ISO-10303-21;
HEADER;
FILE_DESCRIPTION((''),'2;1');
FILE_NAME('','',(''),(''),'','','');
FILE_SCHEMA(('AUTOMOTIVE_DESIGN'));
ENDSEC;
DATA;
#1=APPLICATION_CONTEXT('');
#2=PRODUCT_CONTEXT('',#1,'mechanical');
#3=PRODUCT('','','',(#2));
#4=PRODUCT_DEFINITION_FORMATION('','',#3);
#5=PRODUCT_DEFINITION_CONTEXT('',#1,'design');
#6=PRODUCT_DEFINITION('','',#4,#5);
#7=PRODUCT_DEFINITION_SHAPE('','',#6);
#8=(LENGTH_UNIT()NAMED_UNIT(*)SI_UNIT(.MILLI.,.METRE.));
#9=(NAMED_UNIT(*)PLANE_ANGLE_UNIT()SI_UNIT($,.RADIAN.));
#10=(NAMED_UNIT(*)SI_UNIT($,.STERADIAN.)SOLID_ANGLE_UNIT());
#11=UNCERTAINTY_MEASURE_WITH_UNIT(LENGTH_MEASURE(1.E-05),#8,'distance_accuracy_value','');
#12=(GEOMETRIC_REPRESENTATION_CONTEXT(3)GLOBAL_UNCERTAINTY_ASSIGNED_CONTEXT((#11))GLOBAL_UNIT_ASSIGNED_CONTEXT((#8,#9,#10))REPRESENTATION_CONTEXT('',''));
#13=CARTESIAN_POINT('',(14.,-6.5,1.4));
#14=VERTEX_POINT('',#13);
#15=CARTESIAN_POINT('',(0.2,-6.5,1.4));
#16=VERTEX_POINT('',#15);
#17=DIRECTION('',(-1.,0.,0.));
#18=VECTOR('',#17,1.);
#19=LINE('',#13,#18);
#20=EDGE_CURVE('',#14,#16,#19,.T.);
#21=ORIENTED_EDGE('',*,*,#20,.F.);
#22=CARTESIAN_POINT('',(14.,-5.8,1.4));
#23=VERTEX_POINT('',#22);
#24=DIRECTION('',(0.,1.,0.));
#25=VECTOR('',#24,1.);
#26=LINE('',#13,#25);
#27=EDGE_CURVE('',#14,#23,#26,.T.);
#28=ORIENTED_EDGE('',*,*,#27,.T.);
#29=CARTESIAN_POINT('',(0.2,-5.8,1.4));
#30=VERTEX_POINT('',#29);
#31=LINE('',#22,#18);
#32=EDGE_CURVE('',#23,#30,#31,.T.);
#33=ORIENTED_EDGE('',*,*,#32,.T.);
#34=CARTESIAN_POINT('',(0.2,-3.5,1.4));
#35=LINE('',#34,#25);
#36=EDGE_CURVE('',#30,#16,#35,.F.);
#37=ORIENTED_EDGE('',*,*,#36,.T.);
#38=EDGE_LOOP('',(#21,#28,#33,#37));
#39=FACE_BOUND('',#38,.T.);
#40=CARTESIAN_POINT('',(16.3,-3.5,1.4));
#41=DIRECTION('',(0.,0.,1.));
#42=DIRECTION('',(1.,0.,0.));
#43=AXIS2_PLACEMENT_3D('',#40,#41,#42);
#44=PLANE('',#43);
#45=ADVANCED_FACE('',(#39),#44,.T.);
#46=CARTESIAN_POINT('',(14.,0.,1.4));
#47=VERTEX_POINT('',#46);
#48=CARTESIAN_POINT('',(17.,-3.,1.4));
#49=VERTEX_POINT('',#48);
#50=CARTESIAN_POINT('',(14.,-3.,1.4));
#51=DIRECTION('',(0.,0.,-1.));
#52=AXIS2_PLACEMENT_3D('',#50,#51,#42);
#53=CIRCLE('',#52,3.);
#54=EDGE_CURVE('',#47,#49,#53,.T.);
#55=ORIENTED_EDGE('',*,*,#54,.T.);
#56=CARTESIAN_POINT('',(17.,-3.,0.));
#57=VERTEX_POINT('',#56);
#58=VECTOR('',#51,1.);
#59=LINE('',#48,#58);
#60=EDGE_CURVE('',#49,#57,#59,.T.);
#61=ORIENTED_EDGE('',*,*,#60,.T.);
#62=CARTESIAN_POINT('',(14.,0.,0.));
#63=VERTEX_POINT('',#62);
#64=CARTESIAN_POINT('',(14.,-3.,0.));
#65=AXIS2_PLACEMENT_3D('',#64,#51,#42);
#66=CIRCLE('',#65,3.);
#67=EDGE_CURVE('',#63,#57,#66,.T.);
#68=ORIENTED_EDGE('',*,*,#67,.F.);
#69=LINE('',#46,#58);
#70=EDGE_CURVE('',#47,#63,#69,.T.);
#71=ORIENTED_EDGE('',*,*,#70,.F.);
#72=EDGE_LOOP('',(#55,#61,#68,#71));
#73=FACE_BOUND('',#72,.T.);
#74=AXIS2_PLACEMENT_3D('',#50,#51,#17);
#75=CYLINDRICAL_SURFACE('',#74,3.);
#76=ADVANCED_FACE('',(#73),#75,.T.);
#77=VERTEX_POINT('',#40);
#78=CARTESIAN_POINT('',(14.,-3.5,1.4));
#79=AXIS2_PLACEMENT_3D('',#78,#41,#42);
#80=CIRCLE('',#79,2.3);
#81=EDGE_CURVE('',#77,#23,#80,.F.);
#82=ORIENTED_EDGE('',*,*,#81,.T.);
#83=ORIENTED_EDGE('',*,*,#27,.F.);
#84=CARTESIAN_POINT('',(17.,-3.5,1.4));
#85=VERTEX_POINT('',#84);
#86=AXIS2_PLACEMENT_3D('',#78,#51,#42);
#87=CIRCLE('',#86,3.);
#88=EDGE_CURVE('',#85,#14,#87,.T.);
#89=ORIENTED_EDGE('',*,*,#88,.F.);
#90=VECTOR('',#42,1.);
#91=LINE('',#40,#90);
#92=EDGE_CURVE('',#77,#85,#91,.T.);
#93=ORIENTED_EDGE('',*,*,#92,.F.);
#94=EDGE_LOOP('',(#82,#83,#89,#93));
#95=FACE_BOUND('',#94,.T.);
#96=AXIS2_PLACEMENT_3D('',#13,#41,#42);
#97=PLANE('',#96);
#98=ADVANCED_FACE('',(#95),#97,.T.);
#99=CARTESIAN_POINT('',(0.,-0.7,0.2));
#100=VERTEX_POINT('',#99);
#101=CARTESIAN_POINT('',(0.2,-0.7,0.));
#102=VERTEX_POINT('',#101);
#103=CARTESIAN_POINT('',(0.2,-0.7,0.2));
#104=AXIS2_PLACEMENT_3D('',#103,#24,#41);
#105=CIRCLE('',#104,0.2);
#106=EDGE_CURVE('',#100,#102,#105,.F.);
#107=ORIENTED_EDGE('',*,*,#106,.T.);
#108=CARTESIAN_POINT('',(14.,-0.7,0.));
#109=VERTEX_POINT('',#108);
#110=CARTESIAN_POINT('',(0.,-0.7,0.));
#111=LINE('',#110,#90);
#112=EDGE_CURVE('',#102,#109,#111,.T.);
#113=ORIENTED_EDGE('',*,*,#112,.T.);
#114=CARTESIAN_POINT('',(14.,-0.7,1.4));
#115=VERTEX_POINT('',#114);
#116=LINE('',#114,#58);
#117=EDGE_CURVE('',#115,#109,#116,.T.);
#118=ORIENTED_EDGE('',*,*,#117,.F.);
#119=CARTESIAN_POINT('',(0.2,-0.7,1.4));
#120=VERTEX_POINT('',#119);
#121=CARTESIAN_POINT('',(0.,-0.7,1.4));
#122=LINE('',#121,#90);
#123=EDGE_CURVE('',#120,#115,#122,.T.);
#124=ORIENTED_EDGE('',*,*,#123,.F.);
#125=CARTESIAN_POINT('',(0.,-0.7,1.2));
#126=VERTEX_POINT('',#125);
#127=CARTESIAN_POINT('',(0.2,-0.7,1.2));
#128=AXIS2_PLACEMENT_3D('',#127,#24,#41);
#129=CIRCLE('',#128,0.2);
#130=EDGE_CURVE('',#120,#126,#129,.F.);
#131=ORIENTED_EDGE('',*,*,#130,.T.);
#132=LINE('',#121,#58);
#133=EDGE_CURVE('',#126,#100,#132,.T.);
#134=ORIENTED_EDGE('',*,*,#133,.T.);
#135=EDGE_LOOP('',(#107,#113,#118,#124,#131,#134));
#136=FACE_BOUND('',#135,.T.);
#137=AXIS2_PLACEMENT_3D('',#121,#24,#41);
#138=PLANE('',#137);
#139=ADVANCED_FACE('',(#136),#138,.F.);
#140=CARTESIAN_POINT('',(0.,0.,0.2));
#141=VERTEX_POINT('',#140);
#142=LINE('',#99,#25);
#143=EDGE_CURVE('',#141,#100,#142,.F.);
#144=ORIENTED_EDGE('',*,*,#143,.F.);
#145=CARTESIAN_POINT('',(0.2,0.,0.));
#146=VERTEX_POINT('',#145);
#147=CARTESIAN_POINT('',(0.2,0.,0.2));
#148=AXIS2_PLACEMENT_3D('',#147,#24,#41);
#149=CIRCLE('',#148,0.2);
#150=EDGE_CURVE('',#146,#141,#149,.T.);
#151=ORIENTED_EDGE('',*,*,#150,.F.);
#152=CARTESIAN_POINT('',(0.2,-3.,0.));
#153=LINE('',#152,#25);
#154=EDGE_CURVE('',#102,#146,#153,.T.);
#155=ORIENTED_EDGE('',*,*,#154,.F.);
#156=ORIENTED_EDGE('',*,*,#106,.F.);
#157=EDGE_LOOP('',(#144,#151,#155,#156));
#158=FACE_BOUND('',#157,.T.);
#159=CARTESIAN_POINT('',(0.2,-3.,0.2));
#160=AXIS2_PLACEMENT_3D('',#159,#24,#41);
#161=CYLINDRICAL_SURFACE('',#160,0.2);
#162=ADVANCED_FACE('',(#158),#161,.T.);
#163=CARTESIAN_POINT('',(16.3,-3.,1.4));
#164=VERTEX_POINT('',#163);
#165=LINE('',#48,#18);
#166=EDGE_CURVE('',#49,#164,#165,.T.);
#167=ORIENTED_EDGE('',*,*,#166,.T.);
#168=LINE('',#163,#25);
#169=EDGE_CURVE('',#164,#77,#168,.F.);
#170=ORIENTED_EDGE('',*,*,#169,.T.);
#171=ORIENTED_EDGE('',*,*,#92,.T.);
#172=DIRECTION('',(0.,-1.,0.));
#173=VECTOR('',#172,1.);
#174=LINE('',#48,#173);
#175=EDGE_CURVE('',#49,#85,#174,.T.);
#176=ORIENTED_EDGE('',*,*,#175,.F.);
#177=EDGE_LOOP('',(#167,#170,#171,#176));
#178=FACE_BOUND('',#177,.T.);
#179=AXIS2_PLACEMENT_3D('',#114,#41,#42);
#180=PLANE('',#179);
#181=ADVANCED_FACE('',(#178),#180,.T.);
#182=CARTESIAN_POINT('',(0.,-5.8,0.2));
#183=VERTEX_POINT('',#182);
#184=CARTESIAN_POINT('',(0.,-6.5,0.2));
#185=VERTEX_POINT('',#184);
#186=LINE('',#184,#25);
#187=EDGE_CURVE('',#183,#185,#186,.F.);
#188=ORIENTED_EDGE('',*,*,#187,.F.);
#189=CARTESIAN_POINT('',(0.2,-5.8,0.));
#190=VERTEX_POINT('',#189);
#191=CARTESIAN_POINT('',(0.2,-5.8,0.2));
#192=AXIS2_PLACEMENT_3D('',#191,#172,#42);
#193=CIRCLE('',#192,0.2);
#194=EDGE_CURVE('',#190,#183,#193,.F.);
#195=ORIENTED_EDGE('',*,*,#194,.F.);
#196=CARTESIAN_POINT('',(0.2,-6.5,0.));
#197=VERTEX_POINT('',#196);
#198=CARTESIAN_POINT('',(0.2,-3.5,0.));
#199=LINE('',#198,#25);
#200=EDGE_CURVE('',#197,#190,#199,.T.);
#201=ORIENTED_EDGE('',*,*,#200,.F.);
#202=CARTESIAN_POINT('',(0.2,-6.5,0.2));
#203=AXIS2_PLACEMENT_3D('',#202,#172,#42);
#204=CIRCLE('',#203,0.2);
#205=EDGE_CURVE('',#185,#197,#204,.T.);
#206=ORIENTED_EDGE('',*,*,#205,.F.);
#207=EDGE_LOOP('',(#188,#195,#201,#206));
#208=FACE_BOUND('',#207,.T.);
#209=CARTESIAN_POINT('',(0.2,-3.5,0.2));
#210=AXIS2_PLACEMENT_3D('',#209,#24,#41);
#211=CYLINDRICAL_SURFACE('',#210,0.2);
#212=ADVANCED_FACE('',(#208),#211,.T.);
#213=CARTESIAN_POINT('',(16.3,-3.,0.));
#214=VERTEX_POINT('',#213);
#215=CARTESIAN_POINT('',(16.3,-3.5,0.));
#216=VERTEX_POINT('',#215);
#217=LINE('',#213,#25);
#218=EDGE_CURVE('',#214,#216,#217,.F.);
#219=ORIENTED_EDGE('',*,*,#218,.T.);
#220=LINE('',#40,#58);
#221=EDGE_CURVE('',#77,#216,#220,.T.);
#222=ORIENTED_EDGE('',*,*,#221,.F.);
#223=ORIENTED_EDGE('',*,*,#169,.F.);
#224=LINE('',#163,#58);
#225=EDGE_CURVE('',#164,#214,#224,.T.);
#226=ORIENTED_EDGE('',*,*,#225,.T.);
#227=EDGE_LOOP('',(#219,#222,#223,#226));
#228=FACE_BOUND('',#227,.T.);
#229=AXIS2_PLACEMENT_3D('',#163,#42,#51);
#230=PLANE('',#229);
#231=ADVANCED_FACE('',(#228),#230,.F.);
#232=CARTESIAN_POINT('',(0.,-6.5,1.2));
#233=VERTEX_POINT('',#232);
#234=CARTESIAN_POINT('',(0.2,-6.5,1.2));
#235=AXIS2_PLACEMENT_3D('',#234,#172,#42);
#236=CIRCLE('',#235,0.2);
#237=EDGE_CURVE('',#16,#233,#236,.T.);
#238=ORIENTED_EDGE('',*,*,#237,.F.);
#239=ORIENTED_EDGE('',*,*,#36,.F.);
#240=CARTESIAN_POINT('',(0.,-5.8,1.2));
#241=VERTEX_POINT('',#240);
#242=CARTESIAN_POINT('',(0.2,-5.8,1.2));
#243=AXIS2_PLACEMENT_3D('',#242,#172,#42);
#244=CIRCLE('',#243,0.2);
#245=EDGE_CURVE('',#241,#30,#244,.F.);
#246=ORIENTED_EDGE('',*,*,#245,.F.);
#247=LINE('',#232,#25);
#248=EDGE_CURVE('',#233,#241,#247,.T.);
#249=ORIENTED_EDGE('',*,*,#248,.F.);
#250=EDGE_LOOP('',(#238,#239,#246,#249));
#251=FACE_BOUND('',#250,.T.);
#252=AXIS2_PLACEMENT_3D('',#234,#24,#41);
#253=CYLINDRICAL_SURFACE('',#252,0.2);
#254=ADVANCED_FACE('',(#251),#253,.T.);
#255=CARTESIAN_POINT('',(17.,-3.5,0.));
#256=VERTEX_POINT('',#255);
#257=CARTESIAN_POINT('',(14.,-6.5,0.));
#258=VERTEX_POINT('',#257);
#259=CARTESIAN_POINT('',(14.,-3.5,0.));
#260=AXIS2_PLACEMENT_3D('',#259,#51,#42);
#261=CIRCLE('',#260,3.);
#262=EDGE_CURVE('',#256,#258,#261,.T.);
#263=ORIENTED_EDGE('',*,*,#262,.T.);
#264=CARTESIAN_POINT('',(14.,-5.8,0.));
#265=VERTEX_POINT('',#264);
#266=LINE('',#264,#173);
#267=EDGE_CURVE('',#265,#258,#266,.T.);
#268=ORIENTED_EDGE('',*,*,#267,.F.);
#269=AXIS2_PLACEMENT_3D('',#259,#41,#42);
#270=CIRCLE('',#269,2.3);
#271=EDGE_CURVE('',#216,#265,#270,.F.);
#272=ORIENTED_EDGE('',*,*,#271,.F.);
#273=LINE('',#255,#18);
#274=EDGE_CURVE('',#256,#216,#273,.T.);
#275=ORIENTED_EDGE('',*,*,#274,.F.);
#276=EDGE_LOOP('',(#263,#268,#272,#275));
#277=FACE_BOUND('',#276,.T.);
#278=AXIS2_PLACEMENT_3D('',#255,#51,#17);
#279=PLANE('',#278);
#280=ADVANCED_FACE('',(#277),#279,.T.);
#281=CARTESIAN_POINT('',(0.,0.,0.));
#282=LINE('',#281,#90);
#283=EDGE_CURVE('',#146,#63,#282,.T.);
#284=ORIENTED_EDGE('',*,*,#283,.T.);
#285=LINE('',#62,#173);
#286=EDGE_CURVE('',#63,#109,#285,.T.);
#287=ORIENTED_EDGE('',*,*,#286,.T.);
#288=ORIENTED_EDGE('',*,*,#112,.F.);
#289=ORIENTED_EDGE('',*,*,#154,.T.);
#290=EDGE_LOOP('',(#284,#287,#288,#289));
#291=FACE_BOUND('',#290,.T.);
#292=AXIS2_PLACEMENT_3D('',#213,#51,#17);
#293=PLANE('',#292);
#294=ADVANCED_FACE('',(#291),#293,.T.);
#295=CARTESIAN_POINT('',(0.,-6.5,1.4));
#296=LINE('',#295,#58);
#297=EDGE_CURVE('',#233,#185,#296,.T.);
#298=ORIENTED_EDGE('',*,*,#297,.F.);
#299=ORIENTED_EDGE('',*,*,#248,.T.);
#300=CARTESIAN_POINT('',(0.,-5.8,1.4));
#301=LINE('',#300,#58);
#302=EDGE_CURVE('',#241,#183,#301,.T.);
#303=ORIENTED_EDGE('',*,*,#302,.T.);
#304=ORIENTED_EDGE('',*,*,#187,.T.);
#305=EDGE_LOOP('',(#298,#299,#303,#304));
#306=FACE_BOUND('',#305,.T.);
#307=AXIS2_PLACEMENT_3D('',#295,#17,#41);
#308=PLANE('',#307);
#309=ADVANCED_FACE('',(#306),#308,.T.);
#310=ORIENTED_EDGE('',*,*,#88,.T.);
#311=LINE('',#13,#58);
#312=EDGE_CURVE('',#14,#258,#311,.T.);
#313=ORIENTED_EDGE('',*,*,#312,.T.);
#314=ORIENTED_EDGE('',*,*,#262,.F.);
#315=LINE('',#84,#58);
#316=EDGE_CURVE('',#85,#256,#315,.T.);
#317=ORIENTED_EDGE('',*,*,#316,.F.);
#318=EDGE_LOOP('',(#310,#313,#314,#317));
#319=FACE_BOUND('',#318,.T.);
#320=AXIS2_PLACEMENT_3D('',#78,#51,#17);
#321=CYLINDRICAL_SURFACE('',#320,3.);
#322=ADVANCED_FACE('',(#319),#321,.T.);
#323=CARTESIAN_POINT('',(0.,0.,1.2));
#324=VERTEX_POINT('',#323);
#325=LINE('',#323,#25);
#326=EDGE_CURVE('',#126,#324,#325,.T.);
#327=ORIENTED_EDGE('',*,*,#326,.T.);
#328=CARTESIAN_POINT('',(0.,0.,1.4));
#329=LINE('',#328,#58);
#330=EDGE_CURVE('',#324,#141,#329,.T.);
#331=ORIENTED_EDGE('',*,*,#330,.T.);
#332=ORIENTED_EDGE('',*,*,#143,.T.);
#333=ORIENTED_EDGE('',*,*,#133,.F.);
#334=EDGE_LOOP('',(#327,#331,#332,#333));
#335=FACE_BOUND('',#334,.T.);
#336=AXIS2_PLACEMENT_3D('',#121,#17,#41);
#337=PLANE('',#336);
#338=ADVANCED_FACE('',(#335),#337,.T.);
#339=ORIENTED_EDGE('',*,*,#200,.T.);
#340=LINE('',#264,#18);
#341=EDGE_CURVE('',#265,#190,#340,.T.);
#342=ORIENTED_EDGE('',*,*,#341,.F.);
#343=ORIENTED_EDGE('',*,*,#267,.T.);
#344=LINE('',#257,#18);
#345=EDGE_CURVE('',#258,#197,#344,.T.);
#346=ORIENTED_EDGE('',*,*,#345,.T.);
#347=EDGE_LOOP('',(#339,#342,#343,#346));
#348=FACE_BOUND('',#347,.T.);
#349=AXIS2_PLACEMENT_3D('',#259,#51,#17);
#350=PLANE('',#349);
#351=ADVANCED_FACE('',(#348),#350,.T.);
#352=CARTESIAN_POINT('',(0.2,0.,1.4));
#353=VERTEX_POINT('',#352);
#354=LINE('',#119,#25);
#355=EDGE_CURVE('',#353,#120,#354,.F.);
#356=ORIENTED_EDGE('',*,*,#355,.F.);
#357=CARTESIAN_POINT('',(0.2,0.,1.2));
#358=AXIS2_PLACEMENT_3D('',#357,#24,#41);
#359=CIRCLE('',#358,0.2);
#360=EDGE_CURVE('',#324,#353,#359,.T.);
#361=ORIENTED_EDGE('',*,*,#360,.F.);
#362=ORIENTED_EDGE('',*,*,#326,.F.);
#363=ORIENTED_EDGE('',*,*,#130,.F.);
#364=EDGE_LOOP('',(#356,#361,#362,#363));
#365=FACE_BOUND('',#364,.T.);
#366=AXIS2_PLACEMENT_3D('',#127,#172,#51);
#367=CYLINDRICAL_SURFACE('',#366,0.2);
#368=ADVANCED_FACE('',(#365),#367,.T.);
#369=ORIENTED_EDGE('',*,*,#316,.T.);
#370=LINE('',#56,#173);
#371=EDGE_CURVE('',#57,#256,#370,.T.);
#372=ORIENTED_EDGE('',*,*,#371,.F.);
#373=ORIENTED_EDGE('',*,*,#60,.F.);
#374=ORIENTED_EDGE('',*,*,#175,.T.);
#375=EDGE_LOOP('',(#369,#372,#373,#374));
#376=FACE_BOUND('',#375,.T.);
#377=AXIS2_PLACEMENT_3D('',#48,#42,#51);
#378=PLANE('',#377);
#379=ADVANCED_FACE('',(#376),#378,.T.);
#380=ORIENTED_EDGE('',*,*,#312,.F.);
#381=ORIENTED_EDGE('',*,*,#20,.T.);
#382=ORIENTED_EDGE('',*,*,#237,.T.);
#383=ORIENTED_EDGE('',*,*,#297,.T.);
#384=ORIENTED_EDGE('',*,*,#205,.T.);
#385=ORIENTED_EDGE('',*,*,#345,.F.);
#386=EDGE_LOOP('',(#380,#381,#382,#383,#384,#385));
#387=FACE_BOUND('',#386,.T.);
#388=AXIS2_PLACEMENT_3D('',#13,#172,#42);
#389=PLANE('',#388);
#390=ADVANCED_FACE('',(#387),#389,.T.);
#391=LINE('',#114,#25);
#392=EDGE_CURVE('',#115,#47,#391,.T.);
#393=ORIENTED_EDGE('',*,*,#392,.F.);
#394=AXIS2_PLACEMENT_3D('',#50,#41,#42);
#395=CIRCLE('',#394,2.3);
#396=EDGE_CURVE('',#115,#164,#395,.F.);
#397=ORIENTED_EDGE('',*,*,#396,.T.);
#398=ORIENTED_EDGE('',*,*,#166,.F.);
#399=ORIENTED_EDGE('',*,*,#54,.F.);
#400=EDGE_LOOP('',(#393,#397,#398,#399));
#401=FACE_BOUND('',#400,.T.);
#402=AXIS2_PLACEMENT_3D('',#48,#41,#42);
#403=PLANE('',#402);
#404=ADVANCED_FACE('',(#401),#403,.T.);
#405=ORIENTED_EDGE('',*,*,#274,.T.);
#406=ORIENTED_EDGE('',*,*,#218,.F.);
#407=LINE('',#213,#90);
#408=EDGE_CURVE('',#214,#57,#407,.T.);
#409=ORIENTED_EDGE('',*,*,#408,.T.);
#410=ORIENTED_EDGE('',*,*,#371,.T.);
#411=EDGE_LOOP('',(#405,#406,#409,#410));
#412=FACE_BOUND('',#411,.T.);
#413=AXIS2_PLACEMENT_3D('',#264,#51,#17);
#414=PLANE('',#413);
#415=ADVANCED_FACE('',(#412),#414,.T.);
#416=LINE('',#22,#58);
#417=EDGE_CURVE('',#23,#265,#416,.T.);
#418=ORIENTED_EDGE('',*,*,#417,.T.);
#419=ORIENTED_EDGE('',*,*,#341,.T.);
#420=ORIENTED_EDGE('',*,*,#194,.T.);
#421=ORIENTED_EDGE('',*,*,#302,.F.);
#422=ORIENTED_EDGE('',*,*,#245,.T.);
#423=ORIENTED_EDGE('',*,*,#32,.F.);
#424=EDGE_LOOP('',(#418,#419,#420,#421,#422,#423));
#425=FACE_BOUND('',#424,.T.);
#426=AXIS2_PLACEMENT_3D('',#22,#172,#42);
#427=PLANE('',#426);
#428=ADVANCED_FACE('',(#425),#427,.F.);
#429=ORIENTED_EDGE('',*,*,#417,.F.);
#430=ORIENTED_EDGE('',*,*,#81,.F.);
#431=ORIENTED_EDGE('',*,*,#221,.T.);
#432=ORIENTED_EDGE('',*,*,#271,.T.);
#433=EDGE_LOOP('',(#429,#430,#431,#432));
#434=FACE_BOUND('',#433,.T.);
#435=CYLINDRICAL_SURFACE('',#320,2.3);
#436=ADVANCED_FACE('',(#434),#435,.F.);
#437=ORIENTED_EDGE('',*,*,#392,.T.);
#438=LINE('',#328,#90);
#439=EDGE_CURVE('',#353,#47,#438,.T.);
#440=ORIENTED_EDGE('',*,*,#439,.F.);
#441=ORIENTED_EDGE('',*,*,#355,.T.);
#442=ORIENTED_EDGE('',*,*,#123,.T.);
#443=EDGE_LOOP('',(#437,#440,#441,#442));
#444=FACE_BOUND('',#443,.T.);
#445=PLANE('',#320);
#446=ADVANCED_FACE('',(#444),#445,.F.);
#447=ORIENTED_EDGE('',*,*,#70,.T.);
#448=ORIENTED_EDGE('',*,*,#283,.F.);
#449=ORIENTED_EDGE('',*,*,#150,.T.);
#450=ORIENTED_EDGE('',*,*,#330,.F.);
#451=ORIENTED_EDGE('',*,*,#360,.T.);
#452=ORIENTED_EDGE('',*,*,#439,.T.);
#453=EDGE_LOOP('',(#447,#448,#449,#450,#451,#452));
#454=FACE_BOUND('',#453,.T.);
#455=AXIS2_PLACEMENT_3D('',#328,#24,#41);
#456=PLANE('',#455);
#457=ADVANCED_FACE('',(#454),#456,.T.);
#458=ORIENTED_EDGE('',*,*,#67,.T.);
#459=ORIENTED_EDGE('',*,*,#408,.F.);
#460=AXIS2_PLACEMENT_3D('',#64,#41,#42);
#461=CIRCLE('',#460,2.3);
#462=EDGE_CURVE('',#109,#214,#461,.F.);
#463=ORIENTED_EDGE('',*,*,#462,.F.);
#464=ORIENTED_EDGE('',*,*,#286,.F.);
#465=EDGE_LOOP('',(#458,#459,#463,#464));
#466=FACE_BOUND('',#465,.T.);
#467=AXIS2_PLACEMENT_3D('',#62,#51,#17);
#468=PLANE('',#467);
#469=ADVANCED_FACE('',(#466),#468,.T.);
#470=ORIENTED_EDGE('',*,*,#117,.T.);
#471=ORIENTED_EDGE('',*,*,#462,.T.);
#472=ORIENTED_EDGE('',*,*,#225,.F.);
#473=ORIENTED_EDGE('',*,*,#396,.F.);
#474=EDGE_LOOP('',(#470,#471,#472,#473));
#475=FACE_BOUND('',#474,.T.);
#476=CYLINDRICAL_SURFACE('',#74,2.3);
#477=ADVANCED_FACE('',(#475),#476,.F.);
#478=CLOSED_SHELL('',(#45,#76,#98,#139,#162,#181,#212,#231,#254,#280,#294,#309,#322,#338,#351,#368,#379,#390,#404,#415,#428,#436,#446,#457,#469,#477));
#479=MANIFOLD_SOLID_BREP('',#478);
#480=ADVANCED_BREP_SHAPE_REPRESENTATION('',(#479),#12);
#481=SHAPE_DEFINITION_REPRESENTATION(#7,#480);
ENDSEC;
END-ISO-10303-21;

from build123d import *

# Parameters (mm, degrees)
SM_BASE_FLANGE_1_DEPTH = 1.4
FILLET_1_R             = 0.2


# Sheet-metal steps are written as plain solids
with BuildPart() as part:
    # Sketch 1 → Базовая кромка1 (new body)
    with BuildSketch(Plane.XY):
        with BuildLine():
            Line((0, 0), (14, 0))
            ThreePointArc((14, 0), (16.121320344, -0.878679656), (17, -3))
            Line((17, -3), (17, -3.5))
            ThreePointArc((17, -3.5), (16.121320344, -5.621320344), (14, -6.5))
            Line((14, -6.5), (0, -6.5))
            Line((0, -6.5), (0, -5.8))
            Line((0, -5.8), (14, -5.8))
            ThreePointArc((14, -5.8), (15.626345597, -5.126345597), (16.3, -3.5))
            Line((16.3, -3.5), (16.3, -3))
            ThreePointArc((16.3, -3), (15.626345597, -1.373654403), (14, -0.7))
            Line((14, -0.7), (0, -0.7))
            Line((0, -0.7), (0, 0))
        make_face()
    extrude(amount=SM_BASE_FLANGE_1_DEPTH)

    # Скругление1
    fillet_1_edges = [part.edges().sort_by_distance(p)[0] for p in [
        (0, -0.35, 0),
        (0, -6.15, 0),
        (0, -0.35, 1.4),
        (0, -6.15, 1.4),
    ]]
    fillet(fillet_1_edges, radius=FILLET_1_R)


solid = part.part
